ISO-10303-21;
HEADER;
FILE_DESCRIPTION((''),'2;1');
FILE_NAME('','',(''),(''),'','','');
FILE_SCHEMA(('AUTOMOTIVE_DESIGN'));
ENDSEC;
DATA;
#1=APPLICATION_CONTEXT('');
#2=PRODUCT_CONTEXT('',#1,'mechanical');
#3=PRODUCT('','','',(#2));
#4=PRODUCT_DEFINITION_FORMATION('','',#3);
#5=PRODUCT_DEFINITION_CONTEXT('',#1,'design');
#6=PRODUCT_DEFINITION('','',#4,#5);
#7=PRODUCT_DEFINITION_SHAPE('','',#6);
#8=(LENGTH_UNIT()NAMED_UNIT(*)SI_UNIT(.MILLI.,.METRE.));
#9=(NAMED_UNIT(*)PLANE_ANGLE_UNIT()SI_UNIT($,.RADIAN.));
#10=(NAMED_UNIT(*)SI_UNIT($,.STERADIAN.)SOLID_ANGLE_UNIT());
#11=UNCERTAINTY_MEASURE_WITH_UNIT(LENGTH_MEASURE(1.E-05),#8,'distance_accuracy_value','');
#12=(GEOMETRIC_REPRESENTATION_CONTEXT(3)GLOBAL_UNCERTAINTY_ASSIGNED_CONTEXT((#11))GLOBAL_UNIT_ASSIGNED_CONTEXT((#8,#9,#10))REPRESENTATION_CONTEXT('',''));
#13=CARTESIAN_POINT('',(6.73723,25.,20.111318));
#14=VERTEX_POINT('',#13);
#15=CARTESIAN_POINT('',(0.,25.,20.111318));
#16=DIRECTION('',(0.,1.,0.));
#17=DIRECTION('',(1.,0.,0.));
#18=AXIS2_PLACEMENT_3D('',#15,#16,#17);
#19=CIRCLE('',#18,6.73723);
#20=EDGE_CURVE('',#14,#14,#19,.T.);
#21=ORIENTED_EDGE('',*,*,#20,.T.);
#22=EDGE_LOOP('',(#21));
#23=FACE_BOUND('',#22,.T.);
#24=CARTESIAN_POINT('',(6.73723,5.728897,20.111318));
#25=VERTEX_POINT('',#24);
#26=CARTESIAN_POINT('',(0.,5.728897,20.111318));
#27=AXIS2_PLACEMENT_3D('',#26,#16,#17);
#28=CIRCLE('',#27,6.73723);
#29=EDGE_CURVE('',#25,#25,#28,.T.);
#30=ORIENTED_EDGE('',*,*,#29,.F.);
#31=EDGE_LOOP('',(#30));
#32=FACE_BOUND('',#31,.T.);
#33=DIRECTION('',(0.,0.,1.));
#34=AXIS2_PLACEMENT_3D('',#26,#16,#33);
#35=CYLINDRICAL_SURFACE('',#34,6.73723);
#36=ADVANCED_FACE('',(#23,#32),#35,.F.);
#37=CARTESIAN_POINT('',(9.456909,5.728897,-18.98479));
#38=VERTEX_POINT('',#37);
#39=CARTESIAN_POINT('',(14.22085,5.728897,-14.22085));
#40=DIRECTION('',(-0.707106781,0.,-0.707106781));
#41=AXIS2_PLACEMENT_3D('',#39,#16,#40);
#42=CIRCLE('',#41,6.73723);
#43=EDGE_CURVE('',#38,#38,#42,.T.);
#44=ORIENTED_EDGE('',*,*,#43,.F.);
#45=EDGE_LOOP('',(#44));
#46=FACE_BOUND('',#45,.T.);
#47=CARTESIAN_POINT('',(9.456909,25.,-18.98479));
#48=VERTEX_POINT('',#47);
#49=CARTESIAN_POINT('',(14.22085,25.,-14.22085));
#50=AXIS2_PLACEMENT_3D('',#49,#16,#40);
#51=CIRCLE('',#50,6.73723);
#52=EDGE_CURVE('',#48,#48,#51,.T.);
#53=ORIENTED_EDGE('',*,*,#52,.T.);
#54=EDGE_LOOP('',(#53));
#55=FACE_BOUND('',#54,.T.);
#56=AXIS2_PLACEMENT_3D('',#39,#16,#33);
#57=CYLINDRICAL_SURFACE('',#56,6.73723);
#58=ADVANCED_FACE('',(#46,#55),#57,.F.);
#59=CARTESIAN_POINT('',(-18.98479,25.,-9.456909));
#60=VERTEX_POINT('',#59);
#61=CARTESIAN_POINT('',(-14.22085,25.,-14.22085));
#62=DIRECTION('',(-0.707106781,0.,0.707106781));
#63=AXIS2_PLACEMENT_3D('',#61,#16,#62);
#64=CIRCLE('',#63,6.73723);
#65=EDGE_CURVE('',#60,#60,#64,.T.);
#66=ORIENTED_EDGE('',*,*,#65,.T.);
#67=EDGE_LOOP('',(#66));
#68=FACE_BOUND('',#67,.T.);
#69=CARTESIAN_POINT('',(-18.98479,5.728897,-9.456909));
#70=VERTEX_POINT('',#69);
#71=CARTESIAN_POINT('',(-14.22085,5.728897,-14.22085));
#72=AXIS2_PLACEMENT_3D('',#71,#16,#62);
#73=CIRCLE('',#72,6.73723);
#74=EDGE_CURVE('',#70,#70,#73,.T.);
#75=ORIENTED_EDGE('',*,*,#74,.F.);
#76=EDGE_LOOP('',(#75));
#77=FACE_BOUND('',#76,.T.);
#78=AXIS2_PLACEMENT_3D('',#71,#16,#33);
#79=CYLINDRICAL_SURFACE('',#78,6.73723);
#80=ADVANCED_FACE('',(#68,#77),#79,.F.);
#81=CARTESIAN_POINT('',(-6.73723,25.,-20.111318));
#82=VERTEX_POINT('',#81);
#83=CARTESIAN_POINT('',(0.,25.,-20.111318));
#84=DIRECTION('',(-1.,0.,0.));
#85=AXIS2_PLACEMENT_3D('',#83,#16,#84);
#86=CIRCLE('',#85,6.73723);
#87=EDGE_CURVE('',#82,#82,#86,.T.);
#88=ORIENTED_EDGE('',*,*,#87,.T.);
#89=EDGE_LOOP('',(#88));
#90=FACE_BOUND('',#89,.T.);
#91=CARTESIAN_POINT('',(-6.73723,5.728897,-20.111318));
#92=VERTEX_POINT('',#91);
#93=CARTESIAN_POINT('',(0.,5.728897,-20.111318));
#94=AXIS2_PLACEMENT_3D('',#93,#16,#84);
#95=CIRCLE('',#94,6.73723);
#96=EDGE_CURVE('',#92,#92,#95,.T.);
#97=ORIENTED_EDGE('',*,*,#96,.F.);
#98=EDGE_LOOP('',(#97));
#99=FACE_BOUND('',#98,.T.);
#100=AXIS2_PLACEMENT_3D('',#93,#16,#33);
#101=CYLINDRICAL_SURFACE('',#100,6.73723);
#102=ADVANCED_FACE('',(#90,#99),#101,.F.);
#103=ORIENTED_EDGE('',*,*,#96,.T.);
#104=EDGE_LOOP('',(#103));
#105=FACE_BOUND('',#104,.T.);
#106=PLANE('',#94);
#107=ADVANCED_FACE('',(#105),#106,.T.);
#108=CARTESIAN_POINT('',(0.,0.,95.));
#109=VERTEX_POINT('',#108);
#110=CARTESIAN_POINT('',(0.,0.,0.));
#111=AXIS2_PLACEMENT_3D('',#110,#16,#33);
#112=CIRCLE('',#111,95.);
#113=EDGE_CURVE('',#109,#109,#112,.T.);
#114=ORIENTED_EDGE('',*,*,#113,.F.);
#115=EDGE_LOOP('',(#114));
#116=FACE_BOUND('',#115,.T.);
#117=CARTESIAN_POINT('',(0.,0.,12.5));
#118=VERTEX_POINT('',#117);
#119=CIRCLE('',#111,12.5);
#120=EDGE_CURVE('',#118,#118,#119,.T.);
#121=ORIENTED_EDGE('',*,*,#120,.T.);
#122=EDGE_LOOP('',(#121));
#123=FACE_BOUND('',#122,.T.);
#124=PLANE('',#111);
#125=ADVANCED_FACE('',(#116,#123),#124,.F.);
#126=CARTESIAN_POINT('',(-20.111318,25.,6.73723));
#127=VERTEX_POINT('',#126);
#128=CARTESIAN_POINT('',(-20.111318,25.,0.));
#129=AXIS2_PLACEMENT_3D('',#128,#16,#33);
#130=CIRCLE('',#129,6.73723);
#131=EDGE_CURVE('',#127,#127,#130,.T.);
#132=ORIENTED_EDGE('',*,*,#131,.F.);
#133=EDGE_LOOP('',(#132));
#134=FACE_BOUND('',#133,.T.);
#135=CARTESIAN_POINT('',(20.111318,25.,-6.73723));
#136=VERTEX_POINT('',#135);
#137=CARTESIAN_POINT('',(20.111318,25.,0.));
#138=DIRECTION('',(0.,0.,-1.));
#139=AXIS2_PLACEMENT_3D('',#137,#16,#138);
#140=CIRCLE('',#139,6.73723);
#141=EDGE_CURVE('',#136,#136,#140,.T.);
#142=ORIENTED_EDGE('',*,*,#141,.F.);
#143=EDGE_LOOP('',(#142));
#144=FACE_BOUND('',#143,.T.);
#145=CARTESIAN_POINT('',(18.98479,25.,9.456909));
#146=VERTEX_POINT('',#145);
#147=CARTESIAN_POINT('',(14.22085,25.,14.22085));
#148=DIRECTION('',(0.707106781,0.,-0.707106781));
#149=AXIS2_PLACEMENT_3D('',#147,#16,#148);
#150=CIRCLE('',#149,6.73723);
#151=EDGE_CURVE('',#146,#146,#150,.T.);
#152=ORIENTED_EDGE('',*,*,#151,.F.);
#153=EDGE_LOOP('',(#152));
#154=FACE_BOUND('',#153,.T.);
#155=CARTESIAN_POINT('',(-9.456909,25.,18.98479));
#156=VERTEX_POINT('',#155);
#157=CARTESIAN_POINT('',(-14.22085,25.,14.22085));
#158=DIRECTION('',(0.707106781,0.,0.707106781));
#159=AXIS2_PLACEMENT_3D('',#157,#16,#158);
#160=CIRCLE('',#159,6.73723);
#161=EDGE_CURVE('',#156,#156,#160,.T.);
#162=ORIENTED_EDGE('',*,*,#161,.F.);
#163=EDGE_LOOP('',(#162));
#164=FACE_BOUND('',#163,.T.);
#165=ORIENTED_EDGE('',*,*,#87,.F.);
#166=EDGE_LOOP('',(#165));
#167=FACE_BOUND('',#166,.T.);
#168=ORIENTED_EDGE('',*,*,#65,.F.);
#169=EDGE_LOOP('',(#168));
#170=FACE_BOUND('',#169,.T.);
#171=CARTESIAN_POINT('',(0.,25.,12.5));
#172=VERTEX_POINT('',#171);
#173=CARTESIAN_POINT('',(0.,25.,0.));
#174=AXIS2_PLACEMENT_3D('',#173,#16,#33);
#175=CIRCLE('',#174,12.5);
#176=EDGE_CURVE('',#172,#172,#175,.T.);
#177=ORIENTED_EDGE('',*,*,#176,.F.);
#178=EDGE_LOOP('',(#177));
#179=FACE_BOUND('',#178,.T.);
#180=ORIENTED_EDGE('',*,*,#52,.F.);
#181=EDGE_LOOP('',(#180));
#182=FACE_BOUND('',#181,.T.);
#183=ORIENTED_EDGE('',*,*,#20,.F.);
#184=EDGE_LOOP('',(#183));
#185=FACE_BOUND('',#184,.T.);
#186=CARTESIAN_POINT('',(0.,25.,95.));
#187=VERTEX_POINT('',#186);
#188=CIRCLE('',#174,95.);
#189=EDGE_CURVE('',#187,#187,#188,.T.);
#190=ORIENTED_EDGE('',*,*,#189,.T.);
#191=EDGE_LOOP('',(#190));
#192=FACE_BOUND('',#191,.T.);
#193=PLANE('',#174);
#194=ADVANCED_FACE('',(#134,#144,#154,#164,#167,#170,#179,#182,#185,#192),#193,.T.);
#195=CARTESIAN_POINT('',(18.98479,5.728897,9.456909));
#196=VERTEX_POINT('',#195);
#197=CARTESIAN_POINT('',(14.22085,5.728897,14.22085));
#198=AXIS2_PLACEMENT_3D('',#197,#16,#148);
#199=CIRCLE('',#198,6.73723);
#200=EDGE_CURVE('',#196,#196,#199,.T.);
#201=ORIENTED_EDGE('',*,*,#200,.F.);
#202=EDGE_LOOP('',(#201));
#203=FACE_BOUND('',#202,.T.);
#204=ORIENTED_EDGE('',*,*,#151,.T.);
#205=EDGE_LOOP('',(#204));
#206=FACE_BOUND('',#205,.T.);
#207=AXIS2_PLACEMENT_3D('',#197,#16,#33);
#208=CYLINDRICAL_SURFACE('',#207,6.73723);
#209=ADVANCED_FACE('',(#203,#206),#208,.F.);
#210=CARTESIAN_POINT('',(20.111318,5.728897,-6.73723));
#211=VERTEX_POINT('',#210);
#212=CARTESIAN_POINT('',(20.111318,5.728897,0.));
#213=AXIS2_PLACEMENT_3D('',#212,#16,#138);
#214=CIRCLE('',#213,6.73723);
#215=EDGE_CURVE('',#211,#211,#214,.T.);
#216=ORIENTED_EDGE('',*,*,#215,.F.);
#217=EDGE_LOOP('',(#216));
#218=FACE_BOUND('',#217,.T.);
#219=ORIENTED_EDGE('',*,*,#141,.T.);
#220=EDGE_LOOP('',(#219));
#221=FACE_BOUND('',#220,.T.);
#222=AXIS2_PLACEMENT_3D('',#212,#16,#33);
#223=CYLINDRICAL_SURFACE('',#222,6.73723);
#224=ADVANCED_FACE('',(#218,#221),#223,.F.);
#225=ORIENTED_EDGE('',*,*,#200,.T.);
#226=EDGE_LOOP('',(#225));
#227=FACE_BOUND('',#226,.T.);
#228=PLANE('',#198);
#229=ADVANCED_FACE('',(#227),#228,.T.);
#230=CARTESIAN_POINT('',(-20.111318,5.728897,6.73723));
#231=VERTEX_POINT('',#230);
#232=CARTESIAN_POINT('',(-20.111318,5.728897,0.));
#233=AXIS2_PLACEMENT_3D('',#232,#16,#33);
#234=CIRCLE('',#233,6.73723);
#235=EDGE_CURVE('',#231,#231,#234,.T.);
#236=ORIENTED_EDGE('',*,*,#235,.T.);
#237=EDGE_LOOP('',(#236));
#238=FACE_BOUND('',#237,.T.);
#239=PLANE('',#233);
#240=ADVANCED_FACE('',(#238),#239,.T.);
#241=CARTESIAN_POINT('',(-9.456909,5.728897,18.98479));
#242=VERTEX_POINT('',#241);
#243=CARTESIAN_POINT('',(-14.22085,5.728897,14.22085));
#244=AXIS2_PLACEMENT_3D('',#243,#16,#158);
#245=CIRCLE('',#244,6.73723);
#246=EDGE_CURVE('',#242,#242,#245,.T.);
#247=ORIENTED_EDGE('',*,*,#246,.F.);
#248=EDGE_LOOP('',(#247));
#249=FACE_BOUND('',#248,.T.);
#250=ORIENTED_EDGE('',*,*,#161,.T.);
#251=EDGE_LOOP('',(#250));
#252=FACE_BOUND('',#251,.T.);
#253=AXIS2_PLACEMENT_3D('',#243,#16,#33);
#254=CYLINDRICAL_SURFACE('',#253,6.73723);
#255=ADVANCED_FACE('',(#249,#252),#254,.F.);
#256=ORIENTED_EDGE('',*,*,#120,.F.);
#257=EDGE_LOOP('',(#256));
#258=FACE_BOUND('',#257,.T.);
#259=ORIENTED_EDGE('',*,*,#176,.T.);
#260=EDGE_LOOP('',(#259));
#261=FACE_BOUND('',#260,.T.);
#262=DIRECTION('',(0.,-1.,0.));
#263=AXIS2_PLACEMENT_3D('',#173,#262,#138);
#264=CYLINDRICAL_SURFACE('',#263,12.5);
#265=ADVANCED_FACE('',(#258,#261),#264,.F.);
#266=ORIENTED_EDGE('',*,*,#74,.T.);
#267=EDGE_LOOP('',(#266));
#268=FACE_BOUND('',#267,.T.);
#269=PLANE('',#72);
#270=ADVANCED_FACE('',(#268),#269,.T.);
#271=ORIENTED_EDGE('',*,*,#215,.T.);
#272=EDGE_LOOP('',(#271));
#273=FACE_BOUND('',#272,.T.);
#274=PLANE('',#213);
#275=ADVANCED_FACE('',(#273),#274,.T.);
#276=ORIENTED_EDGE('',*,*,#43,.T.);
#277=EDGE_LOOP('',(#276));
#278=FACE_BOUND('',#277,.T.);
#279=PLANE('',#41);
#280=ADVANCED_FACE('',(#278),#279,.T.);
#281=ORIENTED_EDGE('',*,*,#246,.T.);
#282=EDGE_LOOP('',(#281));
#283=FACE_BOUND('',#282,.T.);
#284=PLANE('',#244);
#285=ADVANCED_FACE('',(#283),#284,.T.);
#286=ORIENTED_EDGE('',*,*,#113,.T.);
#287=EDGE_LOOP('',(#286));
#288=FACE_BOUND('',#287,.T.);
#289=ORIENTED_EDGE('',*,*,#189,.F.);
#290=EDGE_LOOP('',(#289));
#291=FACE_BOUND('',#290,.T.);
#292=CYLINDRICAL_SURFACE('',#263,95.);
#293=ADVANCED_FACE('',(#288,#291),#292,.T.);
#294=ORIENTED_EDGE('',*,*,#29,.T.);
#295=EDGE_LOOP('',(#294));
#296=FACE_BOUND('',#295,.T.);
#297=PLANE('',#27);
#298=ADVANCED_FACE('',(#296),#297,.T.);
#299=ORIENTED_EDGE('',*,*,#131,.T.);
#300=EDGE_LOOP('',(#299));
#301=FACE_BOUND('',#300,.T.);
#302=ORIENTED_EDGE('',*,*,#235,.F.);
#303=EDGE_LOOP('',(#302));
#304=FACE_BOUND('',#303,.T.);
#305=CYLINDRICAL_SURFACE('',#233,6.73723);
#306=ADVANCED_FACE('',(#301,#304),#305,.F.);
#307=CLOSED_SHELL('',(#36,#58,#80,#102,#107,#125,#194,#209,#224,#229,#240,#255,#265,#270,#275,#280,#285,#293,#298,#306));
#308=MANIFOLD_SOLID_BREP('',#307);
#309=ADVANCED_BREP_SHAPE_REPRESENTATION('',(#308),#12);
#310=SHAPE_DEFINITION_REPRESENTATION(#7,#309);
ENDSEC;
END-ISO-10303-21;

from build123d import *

# Parameters (mm, degrees)
SKETCH1_R           = 95
BOSS_EXTRUDE1_DEPTH = 25
SKETCH2_R           = 12.5
CUT_EXTRUDE1_DEPTH  = 137.656503687
SKETCH3_R           = 6.73722953
CUT_EXTRUDE2_DEPTH  = 19.271102921
CIRPATTERN1_COUNT   = 8


with BuildPart() as part:
    # Sketch1 → Boss-Extrude1 (new body)
    with BuildSketch(Plane(origin=(0, 0, 0), x_dir=(1, 0, 0), z_dir=(0, 1, 0))):
        Circle(SKETCH1_R)
    extrude(amount=BOSS_EXTRUDE1_DEPTH)

    # Sketch2 → Cut-Extrude1 (cut, through all)
    with BuildSketch(Plane(origin=(0, 0, 0), x_dir=(1, 0, 0), z_dir=(0, 1, 0))):
        Circle(SKETCH2_R)
    extrude(amount=CUT_EXTRUDE1_DEPTH, mode=Mode.SUBTRACT)

    # Sketch3 → Cut-Extrude2 (cut)
    with BuildSketch(Plane(origin=(0, 25, 0), x_dir=(1, 0, 0), z_dir=(0, 1, 0))):
        with Locations((-20.111318445, 0)):
            Circle(SKETCH3_R)
    cut_extrude2 = extrude(amount=-CUT_EXTRUDE2_DEPTH, mode=Mode.SUBTRACT)

    # CirPattern1: Cut-Extrude2 ×8 about axis
    cirpattern1_axis = Axis((0, 0, 0), (0, 1, 0))
    for i in range(1, CIRPATTERN1_COUNT):
        add(cut_extrude2.rotate(cirpattern1_axis, i * 360 / CIRPATTERN1_COUNT), mode=Mode.SUBTRACT)


solid = part.part
